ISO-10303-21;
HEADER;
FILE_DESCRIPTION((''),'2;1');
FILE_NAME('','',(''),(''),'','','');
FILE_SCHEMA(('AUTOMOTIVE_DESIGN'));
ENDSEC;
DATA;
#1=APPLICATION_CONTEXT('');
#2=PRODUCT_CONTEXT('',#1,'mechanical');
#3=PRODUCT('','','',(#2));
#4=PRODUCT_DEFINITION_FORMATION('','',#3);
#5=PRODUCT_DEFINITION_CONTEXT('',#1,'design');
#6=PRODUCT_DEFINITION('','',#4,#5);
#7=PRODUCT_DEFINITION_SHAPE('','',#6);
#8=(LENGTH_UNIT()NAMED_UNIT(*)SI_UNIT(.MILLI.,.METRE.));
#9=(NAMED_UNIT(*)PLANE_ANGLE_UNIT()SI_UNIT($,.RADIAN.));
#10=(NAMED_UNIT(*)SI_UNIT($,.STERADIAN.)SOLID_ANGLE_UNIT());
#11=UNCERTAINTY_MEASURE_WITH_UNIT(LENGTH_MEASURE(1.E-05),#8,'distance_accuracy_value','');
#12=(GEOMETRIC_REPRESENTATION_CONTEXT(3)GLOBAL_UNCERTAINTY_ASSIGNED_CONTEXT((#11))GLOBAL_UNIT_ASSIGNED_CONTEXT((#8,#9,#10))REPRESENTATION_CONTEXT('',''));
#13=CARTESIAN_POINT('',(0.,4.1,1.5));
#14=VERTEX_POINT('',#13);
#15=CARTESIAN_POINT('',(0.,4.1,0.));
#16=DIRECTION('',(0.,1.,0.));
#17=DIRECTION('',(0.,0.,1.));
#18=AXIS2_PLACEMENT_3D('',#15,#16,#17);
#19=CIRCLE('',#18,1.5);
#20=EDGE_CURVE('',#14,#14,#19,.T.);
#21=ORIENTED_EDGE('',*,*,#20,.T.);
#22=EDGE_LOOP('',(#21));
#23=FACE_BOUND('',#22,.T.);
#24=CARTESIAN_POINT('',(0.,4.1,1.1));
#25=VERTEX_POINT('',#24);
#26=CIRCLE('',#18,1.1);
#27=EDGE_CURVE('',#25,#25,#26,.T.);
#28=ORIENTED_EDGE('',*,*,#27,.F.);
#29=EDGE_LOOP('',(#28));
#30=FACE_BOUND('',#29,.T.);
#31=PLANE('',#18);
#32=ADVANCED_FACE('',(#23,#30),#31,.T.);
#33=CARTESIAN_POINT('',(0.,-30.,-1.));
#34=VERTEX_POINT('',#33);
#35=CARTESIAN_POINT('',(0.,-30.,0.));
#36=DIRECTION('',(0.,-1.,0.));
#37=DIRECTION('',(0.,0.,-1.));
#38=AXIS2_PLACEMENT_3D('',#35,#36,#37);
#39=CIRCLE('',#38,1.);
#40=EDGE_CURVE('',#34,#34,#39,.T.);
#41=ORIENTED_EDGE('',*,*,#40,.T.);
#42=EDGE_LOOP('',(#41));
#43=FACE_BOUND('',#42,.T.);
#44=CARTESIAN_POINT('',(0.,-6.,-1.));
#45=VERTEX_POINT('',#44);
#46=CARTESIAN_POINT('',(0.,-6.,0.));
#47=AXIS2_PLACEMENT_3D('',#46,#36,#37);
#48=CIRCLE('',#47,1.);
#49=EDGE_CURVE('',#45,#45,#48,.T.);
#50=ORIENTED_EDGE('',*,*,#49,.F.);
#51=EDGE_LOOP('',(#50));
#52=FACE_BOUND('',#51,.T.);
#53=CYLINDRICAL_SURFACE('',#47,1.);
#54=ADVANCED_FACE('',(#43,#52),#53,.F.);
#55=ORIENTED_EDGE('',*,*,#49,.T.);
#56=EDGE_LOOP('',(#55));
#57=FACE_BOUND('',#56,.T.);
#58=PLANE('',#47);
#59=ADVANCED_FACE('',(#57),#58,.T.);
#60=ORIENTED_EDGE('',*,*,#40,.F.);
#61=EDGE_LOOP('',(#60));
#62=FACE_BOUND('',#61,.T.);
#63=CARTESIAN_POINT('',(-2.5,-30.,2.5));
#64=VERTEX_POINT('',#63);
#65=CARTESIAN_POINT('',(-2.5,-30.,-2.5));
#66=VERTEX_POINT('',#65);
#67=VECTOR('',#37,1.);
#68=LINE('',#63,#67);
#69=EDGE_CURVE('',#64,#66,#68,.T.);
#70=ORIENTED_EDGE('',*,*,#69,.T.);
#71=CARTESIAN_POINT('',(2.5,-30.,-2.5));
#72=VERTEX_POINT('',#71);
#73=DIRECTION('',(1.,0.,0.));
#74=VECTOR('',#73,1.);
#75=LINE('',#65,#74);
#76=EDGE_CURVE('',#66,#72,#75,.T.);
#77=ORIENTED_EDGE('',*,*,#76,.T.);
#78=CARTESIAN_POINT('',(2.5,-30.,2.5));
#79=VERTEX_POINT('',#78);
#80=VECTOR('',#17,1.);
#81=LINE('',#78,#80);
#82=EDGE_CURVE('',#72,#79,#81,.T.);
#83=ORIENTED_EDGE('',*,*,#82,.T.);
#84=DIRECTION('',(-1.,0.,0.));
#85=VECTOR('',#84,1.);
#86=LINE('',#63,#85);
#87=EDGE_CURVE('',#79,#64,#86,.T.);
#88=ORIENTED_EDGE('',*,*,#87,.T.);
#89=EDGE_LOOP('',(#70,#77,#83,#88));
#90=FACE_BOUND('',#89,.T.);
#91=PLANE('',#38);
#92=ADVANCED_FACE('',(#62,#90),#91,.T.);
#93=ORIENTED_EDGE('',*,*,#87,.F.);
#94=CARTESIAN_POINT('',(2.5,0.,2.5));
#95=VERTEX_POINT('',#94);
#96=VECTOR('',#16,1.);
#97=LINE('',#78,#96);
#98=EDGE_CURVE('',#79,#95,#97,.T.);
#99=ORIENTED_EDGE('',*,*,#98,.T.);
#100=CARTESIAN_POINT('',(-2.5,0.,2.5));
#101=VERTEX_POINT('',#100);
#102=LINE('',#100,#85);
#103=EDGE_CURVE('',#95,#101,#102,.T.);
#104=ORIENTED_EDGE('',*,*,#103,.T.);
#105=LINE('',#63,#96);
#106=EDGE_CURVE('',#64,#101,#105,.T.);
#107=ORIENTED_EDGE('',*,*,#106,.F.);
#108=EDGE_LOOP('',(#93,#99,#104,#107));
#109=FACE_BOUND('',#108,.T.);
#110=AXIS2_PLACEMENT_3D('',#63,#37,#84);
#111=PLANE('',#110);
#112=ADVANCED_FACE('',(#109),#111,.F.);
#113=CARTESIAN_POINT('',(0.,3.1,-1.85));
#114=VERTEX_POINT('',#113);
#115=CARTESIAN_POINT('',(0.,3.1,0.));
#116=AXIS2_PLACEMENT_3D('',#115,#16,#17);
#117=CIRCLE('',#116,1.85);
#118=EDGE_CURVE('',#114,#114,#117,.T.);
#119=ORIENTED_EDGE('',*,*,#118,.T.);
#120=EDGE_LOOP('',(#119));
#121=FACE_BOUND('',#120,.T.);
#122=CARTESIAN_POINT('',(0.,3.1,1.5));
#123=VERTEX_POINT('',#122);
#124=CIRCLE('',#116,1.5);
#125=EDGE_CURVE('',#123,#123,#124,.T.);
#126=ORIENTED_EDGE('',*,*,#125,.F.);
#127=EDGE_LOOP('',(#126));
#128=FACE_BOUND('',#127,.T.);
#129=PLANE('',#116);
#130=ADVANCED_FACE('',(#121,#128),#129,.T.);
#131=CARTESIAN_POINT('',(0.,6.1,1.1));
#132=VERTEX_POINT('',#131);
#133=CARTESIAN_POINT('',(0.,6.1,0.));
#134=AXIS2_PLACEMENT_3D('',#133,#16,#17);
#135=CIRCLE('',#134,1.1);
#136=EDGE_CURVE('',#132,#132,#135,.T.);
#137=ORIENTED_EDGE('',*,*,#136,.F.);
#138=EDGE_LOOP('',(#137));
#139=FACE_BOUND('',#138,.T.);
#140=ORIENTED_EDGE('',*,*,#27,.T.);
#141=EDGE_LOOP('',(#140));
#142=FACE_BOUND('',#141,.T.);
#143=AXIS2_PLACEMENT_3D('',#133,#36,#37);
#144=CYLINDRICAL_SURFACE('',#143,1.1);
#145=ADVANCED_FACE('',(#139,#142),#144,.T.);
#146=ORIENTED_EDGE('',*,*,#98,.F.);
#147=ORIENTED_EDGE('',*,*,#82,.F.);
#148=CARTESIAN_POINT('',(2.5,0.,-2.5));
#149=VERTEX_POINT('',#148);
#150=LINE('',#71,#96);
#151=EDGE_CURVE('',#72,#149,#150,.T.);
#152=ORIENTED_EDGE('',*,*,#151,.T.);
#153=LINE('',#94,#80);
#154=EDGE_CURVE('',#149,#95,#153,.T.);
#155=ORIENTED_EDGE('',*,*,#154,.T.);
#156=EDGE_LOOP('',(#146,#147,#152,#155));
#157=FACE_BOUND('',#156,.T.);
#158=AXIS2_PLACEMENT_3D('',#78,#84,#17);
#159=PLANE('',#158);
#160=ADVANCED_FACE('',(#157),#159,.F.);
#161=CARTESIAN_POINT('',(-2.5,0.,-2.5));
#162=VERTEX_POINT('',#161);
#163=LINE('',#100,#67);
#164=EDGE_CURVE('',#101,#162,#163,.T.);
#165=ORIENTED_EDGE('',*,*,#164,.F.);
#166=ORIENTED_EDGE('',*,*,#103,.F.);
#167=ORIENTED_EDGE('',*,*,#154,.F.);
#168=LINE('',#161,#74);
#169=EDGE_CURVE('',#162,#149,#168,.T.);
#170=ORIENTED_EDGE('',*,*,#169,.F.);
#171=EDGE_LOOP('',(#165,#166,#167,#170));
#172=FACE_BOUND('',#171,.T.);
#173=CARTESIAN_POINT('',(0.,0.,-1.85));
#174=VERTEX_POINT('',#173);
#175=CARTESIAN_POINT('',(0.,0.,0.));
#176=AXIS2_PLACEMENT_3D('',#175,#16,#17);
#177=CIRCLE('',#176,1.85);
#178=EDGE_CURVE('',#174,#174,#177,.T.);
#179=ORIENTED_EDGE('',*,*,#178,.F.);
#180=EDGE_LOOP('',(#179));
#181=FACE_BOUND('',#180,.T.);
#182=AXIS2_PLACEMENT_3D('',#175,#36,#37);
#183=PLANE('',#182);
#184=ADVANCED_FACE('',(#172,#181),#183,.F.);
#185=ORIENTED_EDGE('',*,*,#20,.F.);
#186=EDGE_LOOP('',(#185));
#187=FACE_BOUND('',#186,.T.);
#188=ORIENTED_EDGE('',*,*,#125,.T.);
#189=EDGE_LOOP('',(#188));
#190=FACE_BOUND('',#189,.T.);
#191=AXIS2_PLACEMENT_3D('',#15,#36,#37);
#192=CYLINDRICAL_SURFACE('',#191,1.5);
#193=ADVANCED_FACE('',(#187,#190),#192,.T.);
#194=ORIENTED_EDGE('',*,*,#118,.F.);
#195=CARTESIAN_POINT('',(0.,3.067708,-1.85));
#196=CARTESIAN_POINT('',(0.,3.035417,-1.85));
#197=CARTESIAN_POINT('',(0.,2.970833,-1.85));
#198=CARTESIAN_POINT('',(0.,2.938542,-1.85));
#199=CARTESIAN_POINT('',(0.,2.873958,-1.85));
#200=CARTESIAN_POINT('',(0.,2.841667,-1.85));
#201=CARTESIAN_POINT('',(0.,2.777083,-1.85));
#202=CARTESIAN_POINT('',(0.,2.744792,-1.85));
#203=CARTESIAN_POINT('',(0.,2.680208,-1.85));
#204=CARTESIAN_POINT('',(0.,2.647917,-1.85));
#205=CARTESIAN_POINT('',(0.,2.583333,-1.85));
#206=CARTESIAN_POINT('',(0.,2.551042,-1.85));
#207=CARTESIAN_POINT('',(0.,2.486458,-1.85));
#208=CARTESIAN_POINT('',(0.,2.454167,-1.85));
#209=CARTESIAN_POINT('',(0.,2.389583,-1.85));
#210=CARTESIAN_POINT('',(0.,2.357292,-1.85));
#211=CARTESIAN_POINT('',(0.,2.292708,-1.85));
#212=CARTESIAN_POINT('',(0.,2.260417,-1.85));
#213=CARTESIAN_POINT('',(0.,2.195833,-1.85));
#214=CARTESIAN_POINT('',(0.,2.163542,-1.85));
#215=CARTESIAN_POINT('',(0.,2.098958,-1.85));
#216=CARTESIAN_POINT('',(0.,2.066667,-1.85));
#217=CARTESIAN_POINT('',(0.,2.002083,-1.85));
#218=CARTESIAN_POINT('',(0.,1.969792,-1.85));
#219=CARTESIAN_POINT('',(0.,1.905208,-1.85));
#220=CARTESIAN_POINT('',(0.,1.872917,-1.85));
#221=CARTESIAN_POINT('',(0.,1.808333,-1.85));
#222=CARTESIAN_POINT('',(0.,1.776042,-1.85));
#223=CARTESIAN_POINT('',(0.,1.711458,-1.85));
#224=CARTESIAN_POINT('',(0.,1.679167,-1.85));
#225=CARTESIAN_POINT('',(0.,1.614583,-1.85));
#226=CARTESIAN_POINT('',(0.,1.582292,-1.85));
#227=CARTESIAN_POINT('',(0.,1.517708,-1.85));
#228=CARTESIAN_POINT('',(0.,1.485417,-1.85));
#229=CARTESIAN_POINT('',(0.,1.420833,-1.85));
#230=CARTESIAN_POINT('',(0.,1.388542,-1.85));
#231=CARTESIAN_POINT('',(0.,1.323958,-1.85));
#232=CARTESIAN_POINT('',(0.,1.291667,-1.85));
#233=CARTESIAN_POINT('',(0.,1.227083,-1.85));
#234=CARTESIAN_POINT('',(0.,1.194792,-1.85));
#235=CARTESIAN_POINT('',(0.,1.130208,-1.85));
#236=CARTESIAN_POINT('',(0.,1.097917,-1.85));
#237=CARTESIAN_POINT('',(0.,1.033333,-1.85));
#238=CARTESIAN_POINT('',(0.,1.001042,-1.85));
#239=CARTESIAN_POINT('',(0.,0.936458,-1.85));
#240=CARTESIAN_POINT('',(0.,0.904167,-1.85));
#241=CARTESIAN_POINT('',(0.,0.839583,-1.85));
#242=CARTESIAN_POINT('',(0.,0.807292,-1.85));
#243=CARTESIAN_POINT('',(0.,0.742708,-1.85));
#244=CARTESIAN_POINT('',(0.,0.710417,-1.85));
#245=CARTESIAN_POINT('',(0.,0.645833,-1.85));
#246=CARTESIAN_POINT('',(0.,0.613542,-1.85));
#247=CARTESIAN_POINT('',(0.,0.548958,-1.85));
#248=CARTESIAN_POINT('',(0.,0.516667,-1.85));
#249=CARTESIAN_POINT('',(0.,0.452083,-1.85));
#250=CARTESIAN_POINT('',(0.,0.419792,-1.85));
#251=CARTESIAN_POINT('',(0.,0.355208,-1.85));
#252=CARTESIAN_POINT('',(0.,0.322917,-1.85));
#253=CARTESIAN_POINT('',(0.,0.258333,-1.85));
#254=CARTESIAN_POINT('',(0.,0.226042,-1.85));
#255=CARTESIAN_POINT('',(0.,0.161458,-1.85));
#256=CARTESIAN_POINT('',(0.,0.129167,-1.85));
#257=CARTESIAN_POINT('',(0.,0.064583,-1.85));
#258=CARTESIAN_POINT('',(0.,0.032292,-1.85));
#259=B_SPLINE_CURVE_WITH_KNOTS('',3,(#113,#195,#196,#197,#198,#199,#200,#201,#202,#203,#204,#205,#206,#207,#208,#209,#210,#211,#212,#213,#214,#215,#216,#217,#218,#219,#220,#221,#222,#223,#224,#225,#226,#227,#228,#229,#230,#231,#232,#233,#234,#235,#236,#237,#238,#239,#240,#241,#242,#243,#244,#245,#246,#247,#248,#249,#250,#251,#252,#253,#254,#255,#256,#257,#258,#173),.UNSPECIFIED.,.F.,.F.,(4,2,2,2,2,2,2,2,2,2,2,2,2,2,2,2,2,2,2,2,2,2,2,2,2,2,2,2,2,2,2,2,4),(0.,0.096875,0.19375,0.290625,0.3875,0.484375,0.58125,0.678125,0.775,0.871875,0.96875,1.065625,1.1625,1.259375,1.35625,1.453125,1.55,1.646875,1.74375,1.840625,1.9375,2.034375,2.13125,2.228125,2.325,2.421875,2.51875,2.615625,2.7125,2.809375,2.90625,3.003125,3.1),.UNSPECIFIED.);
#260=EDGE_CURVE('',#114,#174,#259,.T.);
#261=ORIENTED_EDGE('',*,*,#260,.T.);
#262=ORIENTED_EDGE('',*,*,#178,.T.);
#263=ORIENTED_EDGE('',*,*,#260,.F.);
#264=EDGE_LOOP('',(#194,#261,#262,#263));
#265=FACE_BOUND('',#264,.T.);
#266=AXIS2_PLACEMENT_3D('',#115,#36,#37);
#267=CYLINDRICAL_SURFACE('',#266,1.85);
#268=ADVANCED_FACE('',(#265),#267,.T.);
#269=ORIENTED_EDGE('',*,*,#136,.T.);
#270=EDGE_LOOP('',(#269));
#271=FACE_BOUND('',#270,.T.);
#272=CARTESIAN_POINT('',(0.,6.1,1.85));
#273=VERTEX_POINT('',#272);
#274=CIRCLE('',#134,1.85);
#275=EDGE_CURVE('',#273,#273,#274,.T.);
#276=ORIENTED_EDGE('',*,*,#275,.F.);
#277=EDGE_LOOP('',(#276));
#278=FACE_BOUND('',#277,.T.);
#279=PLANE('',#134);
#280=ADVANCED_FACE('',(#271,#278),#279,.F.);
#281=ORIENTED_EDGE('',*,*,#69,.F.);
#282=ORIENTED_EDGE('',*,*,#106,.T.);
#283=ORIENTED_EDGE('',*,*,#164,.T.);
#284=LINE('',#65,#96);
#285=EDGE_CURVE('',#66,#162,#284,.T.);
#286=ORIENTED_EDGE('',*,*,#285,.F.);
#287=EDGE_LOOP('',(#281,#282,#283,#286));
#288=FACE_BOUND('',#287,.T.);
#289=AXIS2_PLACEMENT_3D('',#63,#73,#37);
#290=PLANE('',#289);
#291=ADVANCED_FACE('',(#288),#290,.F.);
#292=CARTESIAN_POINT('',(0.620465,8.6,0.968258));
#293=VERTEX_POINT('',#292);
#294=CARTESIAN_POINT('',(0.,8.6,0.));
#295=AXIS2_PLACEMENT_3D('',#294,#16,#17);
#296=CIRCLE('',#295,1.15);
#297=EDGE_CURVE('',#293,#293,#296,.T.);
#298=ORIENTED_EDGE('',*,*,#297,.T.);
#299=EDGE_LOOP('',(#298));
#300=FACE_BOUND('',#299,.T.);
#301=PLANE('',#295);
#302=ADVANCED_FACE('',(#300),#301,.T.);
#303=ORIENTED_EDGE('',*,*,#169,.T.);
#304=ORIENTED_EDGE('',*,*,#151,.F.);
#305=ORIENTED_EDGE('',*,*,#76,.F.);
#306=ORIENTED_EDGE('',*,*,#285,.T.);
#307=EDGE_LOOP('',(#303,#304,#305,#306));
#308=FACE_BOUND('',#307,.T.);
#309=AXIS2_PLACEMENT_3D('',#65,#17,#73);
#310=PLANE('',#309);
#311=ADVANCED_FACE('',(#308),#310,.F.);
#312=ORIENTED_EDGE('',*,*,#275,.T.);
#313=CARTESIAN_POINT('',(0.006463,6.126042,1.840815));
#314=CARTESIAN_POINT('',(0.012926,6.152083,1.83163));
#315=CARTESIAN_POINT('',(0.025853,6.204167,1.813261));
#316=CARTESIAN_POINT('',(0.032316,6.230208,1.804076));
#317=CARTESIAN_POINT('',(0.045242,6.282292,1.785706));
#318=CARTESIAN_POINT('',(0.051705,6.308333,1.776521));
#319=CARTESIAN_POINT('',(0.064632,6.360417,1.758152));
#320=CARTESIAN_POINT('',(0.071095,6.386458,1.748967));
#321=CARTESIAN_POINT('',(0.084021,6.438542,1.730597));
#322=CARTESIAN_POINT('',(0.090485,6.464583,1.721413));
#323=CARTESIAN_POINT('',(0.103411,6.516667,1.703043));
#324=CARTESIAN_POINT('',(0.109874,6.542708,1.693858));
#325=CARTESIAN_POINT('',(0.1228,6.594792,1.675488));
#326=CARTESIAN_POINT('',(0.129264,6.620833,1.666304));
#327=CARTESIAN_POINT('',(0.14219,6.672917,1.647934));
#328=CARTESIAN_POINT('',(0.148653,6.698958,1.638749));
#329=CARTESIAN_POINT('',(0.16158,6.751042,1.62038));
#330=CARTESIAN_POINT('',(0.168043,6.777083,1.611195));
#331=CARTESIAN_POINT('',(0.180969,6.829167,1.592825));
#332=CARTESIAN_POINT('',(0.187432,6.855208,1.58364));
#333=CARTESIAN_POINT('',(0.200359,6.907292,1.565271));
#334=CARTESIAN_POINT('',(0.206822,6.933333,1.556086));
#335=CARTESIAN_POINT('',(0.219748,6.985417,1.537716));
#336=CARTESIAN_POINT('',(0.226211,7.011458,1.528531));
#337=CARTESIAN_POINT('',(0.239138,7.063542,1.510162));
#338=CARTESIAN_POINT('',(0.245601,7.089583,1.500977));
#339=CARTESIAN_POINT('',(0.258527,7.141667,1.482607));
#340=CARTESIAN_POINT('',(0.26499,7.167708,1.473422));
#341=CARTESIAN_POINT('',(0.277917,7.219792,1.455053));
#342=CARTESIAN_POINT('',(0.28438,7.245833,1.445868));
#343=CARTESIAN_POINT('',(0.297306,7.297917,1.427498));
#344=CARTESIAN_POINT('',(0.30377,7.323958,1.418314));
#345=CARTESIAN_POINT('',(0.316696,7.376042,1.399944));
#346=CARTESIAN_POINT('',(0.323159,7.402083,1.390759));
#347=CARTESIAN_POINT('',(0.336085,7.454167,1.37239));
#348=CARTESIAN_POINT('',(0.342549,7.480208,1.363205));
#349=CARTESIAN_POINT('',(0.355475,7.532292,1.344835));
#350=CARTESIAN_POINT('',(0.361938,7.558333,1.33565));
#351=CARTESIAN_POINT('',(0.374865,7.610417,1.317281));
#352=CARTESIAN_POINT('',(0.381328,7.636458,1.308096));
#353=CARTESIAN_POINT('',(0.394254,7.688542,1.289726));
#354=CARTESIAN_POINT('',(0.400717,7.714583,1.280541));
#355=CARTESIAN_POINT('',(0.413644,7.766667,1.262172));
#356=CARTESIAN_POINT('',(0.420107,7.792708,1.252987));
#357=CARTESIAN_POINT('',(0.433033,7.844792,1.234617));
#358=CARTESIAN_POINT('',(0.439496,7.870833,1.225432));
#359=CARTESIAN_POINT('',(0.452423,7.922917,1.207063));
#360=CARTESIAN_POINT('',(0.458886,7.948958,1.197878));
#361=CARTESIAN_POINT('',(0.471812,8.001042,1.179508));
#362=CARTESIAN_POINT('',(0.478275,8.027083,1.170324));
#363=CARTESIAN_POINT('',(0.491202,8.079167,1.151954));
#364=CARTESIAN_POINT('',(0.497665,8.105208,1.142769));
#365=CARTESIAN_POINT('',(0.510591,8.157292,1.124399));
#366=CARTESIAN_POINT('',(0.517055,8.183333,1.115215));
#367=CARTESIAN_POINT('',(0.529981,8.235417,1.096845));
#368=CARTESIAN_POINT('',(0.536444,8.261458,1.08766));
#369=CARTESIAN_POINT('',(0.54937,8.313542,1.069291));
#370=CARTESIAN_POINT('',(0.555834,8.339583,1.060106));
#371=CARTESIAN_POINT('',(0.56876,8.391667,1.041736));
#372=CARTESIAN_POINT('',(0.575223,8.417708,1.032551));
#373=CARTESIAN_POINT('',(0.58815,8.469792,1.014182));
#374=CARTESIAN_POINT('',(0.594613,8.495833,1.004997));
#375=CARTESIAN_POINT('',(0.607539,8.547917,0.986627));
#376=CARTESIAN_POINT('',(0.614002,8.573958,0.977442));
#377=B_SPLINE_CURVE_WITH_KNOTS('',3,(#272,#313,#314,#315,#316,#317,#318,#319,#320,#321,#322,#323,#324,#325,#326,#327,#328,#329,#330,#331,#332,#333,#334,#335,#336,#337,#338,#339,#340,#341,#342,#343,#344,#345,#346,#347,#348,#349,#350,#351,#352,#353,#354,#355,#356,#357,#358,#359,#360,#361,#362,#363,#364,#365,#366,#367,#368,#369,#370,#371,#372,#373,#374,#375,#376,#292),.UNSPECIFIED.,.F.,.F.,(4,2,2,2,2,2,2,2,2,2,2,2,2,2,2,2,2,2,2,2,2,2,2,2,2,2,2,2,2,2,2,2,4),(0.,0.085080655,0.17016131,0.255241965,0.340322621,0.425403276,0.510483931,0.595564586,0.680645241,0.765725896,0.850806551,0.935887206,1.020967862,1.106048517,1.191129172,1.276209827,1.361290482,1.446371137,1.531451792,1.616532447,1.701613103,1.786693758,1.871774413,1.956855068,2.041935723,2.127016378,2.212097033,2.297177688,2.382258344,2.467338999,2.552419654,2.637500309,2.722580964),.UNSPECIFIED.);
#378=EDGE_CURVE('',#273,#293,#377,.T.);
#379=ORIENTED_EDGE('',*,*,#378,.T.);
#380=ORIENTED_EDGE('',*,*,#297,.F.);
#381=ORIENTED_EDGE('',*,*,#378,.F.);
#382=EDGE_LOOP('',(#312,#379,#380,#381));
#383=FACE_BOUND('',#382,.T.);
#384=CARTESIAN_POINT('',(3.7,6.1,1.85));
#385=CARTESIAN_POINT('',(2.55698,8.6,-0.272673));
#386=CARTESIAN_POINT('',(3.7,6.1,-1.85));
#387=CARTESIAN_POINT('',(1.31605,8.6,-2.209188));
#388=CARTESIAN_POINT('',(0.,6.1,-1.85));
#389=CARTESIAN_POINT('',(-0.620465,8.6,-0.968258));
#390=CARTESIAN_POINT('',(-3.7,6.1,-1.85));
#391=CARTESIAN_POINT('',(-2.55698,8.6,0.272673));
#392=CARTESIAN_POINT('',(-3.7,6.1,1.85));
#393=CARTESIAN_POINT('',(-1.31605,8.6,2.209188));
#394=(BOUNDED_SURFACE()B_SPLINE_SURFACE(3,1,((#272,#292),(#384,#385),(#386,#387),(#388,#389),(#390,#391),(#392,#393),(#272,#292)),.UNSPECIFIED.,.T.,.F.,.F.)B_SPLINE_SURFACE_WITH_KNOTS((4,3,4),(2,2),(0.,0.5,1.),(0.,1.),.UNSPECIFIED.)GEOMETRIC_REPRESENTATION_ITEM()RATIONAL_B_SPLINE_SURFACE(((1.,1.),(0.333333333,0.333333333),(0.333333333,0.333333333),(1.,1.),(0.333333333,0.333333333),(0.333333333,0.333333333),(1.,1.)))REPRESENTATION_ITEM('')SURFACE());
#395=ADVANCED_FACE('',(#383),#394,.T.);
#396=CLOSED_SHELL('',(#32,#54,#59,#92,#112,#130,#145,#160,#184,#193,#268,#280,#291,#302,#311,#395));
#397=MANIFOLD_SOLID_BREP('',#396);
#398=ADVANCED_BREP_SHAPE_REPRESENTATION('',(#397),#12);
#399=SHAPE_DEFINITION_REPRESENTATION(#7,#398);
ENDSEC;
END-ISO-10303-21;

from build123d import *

# Parameters (mm, degrees)
SKETCH1_R           = 1.85
BOSS_EXTRUDE1_DEPTH = 3.1
SKETCH2_R           = 1.5
BOSS_EXTRUDE2_DEPTH = 1
SKETCH3_R           = 1.1
BOSS_EXTRUDE3_DEPTH = 2
SKETCH6_W           = 5
SKETCH6_H           = 5
BOSS_EXTRUDE4_DEPTH = 30
SKETCH7_R           = 1
CUT_EXTRUDE1_DEPTH  = 24


with BuildPart() as part:
    # Sketch1 → Boss-Extrude1 (new body)
    with BuildSketch(Plane(origin=(0, 0, 0), x_dir=(1, 0, 0), z_dir=(0, 1, 0))):
        with Locations(Location((0, 0, 0), (0, 0, 90))):
            Circle(SKETCH1_R)
    extrude(amount=BOSS_EXTRUDE1_DEPTH)

    # Sketch2 → Boss-Extrude2 (add)
    with BuildSketch(Plane(origin=(0, 3.1, 0), x_dir=(1, 0, 0), z_dir=(0, 1, 0))):
        with Locations(Location((0, 0, 0), (0, 0, 270))):
            Circle(SKETCH2_R)
    extrude(amount=BOSS_EXTRUDE2_DEPTH)

    # Sketch3 → Boss-Extrude3 (add)
    with BuildSketch(Plane(origin=(0, 4.1, 0), x_dir=(1, 0, 0), z_dir=(0, 1, 0))):
        with Locations(Location((0, 0, 0), (0, 0, 270))):
            Circle(SKETCH3_R)
    extrude(amount=BOSS_EXTRUDE3_DEPTH)

    # Loft1: read off the stored shape, not the designer's step
    # Loft1: loft between two sections, ruled curve by curve
    loft1_from = [
        Edge.make_bspline([(0, 6.1, 1.85), (3.7, 6.1, 1.85), (3.7, 6.1, -1.85), (0, 6.1, -1.85), (-3.7, 6.1, -1.85), (-3.7, 6.1, 1.85), (0, 6.1, 1.85)], [0, 0, 0, 0, 0.5, 0.5, 0.5, 1, 1, 1, 1], 3, [1, 0.333333333, 0.333333333, 1, 0.333333333, 0.333333333, 1]),
    ]
    loft1_to = [
        Edge.make_bspline([(0.620465421, 8.6, 0.968257539), (2.556980499, 8.6, -0.272673303), (1.316049657, 8.6, -2.209188381), (-0.620465421, 8.6, -0.968257539), (-2.556980499, 8.6, 0.272673303), (-1.316049657, 8.6, 2.209188381), (0.620465421, 8.6, 0.968257539)], [0, 0, 0, 0, 0.5, 0.5, 0.5, 1, 1, 1, 1], 3, [1, 0.333333333, 0.333333333, 1, 0.333333333, 0.333333333, 1]),
    ]
    loft1 = Solid(Shell([*[Face.make_surface_from_curves(loft1_from[k], loft1_to[k]) for k in range(1)], Face(Wire(loft1_from)), Face(Wire(loft1_to))]))
    add(loft1)

    # Sketch6 → Boss-Extrude4 (add)
    with BuildSketch(Plane.XZ):
        Rectangle(SKETCH6_W, SKETCH6_H)
    extrude(amount=BOSS_EXTRUDE4_DEPTH)

    # Sketch7 → Cut-Extrude1 (cut)
    with BuildSketch(Plane.XZ.offset(30)):
        with Locations(Location((0, 0, 0), (0, 0, 270))):
            Circle(SKETCH7_R)
    extrude(amount=-CUT_EXTRUDE1_DEPTH, mode=Mode.SUBTRACT)


solid = part.part
